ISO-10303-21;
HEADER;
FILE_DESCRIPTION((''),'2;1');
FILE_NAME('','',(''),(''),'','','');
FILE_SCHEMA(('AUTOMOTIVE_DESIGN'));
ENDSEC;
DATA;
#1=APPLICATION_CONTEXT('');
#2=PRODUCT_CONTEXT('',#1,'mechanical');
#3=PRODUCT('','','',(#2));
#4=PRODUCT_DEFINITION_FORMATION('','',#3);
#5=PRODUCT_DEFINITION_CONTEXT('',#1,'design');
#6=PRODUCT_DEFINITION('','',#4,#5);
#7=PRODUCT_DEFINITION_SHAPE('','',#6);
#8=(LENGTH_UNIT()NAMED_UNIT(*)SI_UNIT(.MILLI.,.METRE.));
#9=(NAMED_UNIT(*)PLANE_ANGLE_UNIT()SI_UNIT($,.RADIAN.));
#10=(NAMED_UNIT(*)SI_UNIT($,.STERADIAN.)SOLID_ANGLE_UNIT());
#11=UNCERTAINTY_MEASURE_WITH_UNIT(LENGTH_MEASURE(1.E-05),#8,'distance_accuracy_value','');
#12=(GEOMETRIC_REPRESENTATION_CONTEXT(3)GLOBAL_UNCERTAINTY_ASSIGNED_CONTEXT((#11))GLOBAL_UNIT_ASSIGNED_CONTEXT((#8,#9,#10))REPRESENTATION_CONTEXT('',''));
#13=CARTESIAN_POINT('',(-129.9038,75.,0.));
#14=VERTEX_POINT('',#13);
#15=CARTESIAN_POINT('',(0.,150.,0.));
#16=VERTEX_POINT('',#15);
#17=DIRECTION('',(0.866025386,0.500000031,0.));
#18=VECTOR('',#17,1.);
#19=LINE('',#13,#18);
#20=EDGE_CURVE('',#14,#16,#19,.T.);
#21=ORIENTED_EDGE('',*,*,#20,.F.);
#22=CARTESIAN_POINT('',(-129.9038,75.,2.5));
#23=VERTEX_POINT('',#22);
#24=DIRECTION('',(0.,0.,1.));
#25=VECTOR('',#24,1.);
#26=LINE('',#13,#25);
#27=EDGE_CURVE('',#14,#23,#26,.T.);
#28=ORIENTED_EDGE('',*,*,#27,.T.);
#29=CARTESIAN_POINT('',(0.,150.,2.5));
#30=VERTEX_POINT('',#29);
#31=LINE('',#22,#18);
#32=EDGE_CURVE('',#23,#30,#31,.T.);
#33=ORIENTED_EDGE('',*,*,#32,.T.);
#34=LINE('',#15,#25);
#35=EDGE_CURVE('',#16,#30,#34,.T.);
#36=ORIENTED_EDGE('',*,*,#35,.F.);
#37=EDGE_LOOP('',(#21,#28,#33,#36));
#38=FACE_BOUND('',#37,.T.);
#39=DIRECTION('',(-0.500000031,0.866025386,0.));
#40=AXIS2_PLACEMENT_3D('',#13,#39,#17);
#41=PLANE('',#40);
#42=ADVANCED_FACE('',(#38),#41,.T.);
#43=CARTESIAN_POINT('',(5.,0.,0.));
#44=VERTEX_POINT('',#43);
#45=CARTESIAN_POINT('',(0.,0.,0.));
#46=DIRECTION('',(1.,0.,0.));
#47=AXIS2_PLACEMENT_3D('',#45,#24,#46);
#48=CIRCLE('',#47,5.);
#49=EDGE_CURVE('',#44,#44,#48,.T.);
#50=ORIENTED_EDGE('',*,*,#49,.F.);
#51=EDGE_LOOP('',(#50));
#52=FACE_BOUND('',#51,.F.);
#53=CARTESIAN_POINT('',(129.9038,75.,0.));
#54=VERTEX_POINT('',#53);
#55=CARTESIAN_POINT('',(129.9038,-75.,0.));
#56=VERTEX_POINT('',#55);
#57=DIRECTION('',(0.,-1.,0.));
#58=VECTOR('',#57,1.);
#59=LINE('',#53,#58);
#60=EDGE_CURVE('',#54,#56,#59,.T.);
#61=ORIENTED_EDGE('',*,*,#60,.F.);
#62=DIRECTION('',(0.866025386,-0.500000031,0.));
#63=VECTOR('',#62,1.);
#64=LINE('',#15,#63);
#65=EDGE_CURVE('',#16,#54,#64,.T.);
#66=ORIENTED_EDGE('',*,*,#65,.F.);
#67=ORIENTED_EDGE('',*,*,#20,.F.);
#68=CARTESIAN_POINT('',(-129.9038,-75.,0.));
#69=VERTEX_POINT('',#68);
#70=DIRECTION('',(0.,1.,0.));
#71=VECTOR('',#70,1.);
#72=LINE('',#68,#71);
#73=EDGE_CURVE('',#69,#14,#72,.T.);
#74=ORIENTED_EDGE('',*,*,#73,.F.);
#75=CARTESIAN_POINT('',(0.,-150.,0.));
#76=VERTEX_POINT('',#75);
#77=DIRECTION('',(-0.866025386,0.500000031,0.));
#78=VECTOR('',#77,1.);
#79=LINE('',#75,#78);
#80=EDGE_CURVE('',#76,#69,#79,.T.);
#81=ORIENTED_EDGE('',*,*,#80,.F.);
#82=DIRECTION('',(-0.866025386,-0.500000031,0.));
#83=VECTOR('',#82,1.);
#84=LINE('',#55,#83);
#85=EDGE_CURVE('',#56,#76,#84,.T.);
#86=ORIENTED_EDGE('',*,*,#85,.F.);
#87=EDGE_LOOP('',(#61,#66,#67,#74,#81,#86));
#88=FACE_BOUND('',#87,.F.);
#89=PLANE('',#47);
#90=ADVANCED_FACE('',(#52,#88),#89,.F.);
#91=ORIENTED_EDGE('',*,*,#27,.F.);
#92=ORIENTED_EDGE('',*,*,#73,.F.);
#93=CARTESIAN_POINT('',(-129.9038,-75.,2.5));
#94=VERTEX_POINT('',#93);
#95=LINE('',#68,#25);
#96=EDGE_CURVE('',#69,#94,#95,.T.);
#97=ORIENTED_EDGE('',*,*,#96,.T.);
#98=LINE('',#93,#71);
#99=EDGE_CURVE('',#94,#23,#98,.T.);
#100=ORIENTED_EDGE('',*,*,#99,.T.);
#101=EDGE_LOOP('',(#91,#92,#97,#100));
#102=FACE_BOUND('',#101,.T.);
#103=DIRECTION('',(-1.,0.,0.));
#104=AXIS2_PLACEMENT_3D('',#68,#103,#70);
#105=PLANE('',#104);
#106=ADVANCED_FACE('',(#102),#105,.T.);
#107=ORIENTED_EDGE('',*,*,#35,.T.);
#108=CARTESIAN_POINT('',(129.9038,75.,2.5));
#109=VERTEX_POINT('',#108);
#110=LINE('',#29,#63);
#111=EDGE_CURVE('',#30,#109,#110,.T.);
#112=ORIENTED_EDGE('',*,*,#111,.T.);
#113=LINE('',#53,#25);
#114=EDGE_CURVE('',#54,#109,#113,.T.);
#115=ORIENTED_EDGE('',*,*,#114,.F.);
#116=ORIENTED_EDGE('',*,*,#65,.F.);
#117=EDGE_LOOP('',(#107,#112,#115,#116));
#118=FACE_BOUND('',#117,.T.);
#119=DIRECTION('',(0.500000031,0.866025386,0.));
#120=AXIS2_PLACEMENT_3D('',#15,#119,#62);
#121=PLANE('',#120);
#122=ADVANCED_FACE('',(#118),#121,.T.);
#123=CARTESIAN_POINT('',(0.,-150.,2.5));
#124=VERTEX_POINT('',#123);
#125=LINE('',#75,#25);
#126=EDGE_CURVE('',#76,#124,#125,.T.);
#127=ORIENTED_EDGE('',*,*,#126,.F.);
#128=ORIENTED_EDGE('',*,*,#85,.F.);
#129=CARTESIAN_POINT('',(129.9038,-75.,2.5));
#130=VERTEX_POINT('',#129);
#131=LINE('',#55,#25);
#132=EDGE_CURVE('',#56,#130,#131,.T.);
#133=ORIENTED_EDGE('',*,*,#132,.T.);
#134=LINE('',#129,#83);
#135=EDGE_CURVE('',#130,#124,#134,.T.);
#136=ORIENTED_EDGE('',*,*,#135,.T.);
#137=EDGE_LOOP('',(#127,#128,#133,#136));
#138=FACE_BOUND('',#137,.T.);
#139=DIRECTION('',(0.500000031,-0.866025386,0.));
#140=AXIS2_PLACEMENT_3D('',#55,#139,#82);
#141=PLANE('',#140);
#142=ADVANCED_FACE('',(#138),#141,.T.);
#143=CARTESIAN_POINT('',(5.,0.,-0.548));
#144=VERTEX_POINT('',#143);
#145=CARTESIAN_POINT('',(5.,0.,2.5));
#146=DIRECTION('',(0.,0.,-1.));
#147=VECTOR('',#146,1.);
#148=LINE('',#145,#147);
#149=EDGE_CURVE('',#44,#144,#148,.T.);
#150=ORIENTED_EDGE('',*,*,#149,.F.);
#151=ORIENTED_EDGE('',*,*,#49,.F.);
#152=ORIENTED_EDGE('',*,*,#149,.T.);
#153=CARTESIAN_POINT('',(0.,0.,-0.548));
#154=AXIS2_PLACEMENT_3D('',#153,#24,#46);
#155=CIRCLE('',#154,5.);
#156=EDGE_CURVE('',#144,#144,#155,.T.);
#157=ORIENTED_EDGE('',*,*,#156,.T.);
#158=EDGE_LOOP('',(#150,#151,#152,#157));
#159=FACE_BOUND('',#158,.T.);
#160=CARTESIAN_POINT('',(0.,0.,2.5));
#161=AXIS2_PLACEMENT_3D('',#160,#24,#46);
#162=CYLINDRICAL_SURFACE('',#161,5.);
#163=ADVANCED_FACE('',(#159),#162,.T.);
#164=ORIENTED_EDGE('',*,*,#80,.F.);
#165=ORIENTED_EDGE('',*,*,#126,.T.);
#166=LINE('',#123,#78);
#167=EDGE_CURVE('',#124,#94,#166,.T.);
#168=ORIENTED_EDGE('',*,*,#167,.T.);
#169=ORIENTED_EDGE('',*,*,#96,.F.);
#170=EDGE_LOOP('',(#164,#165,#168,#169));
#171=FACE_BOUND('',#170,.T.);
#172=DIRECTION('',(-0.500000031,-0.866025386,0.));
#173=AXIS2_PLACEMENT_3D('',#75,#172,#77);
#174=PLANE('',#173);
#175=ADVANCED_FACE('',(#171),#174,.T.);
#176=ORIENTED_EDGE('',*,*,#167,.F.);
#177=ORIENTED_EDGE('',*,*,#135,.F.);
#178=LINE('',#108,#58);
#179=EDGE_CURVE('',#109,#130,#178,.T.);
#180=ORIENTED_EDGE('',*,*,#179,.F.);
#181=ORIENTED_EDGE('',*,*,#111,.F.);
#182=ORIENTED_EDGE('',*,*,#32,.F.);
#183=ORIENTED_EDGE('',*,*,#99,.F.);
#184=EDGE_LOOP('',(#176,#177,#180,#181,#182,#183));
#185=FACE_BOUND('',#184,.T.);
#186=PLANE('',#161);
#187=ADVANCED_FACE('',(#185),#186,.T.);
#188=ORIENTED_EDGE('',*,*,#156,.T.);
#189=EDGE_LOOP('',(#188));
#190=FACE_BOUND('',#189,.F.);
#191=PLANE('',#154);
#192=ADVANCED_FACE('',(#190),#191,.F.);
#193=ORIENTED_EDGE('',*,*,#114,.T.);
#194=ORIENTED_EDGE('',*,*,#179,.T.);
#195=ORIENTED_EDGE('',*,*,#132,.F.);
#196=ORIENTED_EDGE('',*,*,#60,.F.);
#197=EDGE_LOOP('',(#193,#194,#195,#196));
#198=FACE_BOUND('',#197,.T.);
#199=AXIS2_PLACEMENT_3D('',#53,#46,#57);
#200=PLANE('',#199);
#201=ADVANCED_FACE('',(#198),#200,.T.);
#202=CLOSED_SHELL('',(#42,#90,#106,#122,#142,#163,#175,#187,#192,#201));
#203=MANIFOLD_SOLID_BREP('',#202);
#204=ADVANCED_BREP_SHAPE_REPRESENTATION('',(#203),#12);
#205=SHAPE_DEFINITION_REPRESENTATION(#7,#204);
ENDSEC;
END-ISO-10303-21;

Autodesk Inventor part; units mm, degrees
ref_plane "YZ Plane" through (0, 0, 0) normal (1, 0, 0) x (0, 1, 0)
ref_plane "XZ Plane" through (0, 0, 0) normal (0, 1, 0) x (-1, 0, 0)
ref_plane "XY Plane" through (0, 0, 0) normal (0, 0, 1) x (1, 0, 0)
sketch "Sketch1" plane through (0, 0, 0) normal (0, 0, 1) x (1, 0, 0)
  line L0 (0, 150) -> (129.9038, 75)
  line L1 (129.9038, 75) -> (129.9038, -75)
  line L2 (129.9038, -75) -> (0, -150)
  line L3 (0, -150) -> (-129.9038, -75)
  line L4 (-129.9038, -75) -> (-129.9038, 75)
  line L5 (-129.9038, 75) -> (0, 150)
  point P0 (0, 0)
  point P1 (0, 0)
  dimension "d0" = 150
extrude "Extrusion1" add sketch "Sketch1" along normal blind 2.5
sketch "Sketch2" plane through (0, 0, 2.5) normal (0, 0, 1) x (1, 0, 0)
  circle A0 centre (0, 0) radius 5
  dimension "d3" = 10
extrude "Extrusion2" cut sketch "Sketch2" against normal blind 10
sketch "Sketch3" plane through (0, 0, 2.5) normal (0, 0, 1) x (1, 0, 0)
  circle A0 centre (0, 0) radius 5
sheet face with bend "Face1" sketch "Sketch3" thickness 3.048 toward (0, 0, -1) bend radius 3.048
bend "Bend1"
equation "\"d6\" = Thickness"
equation "\"d7\" = BendRadius"
equation "\"d8\" = BendReliefWidth"
equation "\"d10\" = MinimumRemnant"
equation "\"d9\" = BendReliefDepth"
equation "\"d11\" = TransitionRadius"
equation "\"BendRadius\" = Thickness"
equation "\"BendReliefWidth\" = Thickness"
equation "\"BendReliefDepth\" = 0.5 * Thickness"
equation "\"CornerReliefSize\" = 4 * Thickness"
equation "\"MinimumRemnant\" = 2 * Thickness"
equation "\"TransitionRadius\" = BendRadius"
equation "\"JacobiRadiusSize\" = BendRadius"
equation "\"GapSize\" = Thickness"
equation "\"Thickness\" = 3.048"
properties part number "Bottom plate 2.5mm" material "Aluminum 6061"
